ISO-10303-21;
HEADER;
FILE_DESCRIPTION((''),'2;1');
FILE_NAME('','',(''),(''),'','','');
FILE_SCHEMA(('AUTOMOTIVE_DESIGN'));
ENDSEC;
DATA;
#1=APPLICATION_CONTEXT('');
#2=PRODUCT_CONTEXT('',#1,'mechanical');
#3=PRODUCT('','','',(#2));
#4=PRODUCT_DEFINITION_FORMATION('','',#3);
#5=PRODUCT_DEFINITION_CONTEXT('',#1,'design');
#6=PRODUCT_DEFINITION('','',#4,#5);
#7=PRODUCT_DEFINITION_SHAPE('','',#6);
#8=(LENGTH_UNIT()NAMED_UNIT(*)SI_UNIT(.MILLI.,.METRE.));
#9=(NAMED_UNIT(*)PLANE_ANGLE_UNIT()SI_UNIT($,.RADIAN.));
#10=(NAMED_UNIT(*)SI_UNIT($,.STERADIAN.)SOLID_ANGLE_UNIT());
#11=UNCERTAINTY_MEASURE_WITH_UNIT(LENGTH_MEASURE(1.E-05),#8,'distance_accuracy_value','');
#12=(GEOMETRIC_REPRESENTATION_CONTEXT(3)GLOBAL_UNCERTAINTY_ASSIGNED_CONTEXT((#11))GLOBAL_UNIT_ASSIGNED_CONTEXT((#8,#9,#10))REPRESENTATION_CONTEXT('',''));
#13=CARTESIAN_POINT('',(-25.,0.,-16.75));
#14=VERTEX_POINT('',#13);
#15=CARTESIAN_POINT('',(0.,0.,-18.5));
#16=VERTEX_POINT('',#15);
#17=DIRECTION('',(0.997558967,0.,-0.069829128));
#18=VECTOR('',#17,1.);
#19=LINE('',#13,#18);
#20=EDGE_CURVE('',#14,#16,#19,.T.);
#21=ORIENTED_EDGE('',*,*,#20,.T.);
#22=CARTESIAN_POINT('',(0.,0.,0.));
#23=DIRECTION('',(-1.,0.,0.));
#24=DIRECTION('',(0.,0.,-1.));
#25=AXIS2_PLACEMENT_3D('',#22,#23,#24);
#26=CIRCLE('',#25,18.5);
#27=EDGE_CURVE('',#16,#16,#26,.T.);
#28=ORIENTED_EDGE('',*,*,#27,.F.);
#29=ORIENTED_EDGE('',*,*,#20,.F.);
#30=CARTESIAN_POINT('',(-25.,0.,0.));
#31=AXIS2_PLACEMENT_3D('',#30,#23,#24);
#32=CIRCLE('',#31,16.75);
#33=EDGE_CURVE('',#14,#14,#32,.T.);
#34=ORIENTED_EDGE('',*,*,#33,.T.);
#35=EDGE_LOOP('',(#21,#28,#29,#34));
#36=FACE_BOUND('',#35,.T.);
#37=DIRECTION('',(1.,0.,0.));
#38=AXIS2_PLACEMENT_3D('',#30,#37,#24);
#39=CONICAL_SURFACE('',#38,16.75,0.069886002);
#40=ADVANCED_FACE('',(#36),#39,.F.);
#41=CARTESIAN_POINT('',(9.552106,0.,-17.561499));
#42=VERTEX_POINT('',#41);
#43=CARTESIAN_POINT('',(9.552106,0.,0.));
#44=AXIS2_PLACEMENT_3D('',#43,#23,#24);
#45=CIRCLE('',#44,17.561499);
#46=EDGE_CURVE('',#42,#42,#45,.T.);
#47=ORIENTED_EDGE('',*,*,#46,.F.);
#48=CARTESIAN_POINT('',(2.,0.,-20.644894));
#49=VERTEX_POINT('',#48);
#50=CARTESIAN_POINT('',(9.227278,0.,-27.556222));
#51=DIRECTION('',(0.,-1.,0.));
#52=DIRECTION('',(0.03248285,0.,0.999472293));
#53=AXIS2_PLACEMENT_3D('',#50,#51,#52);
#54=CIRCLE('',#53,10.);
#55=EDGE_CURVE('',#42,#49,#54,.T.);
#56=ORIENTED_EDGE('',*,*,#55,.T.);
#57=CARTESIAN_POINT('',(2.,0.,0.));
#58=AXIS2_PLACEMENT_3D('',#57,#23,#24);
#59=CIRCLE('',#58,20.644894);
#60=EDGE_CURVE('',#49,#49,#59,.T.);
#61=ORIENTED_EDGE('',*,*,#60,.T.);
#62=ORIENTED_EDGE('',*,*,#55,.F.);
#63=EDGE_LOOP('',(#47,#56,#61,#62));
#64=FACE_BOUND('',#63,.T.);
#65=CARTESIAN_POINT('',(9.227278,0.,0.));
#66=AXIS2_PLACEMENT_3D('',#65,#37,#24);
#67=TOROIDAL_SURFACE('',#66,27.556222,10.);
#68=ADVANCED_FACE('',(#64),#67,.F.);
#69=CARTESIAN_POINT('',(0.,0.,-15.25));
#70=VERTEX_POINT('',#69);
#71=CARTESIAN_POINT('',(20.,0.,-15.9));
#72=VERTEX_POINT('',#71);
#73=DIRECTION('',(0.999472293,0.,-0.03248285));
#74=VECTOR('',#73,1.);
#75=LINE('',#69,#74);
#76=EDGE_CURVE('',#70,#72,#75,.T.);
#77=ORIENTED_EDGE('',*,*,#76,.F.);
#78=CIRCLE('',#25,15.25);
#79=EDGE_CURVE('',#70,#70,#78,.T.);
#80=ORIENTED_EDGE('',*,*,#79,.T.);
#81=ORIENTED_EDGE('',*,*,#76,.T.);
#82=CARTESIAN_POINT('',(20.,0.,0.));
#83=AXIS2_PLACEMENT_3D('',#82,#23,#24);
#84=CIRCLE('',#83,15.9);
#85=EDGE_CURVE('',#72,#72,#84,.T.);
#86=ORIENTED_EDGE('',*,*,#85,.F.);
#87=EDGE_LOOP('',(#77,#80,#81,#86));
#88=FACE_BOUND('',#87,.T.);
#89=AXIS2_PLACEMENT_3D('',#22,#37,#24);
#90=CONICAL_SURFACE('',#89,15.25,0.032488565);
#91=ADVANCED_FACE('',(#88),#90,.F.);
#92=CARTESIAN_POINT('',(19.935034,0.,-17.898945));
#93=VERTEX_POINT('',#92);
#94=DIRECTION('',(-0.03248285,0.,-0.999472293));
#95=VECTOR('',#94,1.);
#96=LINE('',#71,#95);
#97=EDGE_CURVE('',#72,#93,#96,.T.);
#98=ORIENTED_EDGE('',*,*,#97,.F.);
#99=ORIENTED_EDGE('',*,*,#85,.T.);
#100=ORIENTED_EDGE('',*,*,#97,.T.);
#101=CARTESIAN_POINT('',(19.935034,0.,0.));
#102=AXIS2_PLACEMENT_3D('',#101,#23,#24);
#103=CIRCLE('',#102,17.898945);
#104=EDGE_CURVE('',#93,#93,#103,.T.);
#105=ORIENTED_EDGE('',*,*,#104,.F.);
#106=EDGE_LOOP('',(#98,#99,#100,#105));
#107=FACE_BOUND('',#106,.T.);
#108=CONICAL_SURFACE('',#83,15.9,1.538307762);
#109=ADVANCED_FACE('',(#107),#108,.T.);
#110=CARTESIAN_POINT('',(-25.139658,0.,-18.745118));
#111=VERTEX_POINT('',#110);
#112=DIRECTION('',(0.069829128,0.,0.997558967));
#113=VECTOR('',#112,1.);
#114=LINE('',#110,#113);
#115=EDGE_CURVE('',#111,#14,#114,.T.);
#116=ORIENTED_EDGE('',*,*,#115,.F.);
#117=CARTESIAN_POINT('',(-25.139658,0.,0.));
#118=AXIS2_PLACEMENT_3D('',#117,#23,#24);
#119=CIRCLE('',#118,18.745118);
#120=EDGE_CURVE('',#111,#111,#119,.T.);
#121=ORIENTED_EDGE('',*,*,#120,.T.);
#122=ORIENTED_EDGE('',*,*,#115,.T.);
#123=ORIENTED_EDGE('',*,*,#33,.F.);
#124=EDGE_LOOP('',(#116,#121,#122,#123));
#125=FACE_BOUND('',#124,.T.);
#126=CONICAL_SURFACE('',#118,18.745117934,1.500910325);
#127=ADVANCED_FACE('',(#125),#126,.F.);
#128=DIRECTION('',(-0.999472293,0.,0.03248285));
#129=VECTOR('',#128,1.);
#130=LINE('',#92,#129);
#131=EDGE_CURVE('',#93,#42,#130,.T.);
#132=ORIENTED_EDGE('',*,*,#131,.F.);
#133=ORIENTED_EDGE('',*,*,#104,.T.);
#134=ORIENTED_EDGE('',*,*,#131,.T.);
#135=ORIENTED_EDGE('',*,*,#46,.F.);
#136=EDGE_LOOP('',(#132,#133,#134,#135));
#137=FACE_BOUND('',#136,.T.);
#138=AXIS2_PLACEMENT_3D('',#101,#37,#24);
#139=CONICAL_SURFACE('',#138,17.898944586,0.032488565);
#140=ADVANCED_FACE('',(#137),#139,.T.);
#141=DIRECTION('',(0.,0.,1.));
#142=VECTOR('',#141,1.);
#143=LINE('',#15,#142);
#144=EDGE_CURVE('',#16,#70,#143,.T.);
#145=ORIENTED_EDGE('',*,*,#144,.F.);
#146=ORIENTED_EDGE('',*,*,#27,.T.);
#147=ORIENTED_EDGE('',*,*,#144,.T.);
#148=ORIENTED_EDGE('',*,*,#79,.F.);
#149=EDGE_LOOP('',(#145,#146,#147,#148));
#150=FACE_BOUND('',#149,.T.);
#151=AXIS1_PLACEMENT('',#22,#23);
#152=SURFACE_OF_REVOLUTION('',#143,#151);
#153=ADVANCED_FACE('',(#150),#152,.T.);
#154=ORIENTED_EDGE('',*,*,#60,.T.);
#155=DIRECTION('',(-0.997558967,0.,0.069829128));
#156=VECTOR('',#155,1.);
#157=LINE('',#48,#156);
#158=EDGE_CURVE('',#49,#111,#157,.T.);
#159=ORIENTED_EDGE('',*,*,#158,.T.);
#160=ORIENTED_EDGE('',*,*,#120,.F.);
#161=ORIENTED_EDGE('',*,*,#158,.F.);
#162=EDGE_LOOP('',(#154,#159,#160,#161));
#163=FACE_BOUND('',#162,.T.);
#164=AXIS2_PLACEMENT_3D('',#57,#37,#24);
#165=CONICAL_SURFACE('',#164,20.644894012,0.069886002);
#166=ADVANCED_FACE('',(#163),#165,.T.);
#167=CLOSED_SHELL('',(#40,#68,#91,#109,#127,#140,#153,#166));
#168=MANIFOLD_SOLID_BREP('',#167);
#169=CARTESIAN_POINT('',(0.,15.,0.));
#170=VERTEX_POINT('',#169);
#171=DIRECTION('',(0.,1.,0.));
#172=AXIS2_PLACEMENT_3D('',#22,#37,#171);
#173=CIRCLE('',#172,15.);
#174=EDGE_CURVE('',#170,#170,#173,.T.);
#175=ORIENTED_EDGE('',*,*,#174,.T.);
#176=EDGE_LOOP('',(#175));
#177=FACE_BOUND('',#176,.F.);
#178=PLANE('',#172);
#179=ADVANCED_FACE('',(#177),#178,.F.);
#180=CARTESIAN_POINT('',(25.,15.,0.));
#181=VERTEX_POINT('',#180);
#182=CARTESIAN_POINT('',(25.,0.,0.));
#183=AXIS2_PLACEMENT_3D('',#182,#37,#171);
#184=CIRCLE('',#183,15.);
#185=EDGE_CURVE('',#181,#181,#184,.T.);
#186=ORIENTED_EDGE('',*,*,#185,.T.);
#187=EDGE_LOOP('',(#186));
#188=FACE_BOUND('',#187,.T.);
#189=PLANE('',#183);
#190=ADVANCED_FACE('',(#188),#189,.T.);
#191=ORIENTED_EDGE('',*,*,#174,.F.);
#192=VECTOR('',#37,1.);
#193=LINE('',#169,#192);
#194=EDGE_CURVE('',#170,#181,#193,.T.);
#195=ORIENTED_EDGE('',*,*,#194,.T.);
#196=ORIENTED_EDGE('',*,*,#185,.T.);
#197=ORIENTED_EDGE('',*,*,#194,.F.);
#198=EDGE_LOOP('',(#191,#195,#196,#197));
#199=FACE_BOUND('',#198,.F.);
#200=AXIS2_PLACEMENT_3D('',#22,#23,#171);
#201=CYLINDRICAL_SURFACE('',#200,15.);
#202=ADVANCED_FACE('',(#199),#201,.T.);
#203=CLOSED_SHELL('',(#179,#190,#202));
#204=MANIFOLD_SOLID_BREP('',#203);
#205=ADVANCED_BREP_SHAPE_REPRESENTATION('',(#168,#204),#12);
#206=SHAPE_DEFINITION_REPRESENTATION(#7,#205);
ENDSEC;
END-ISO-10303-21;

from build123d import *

# Parameters (mm, degrees)
F1_R     = 15
F2_DEPTH = 25


# Not quite as in the source:
# - a fillet or chamfer that OpenCascade refuses, or shapes differently, is made with other operations: its cross-section is extruded or revolved along the edge and cut away or added


with BuildPart() as f2:
    # F1 (on Right) → F2 (new body)
    with BuildSketch(Plane.YZ):
        Circle(F1_R)
    extrude(amount=F2_DEPTH)


with BuildPart() as f3:
    # F3: sweep along a path in F3_path
    with BuildLine(Plane(origin=(0, 15, 0), x_dir=(0, 0, -1), z_dir=(-1, 0, 0))) as f3_path:
        CenterArc((0, 15), 15, 0, 360)
    # F0 (on Front) → F3 (sweep)
    with BuildSketch(Plane.XZ):
        Polygon((0, 18.5), (0, 15.25), (20, 15.9), (19.935034301, 17.898944586), (2, 17.3160559712), (2, 20.6448940122), (-25.1396582554, 18.7451179343), (-25, 16.75), align=None)
    sweep(path=f3_path.line)

    # F4: fillet of radius 10 on 1 edges, made by hand

    # F4_s1 → F4_t2 (revolve)
    with BuildSketch(Plane.XZ):
        with BuildLine():
            ThreePointArc((9.5521060353, -17.5614994174), (5.4473593848, -18.2981329798), (2, -20.6448940122))
            Line((2, -20.6448940122), (1.8554544492, -20.5066674455))
            ThreePointArc((1.8554544492, -20.5066674455), (1.8, -18.9804749917), (1.8, -17.3160559712))
            Line((1.8, -17.3160559712), (2.0064965699, -17.1161615126))
            Line((2.0064965699, -17.1161615126), (9.5586026053, -17.3616049588))
            Line((9.5586026053, -17.3616049588), (9.5521060353, -17.5614994174))
        make_face()
    revolve(axis=Axis((2, 0, 0), (-1, 0, 0)))


solid = Compound([f2.part, f3.part])
